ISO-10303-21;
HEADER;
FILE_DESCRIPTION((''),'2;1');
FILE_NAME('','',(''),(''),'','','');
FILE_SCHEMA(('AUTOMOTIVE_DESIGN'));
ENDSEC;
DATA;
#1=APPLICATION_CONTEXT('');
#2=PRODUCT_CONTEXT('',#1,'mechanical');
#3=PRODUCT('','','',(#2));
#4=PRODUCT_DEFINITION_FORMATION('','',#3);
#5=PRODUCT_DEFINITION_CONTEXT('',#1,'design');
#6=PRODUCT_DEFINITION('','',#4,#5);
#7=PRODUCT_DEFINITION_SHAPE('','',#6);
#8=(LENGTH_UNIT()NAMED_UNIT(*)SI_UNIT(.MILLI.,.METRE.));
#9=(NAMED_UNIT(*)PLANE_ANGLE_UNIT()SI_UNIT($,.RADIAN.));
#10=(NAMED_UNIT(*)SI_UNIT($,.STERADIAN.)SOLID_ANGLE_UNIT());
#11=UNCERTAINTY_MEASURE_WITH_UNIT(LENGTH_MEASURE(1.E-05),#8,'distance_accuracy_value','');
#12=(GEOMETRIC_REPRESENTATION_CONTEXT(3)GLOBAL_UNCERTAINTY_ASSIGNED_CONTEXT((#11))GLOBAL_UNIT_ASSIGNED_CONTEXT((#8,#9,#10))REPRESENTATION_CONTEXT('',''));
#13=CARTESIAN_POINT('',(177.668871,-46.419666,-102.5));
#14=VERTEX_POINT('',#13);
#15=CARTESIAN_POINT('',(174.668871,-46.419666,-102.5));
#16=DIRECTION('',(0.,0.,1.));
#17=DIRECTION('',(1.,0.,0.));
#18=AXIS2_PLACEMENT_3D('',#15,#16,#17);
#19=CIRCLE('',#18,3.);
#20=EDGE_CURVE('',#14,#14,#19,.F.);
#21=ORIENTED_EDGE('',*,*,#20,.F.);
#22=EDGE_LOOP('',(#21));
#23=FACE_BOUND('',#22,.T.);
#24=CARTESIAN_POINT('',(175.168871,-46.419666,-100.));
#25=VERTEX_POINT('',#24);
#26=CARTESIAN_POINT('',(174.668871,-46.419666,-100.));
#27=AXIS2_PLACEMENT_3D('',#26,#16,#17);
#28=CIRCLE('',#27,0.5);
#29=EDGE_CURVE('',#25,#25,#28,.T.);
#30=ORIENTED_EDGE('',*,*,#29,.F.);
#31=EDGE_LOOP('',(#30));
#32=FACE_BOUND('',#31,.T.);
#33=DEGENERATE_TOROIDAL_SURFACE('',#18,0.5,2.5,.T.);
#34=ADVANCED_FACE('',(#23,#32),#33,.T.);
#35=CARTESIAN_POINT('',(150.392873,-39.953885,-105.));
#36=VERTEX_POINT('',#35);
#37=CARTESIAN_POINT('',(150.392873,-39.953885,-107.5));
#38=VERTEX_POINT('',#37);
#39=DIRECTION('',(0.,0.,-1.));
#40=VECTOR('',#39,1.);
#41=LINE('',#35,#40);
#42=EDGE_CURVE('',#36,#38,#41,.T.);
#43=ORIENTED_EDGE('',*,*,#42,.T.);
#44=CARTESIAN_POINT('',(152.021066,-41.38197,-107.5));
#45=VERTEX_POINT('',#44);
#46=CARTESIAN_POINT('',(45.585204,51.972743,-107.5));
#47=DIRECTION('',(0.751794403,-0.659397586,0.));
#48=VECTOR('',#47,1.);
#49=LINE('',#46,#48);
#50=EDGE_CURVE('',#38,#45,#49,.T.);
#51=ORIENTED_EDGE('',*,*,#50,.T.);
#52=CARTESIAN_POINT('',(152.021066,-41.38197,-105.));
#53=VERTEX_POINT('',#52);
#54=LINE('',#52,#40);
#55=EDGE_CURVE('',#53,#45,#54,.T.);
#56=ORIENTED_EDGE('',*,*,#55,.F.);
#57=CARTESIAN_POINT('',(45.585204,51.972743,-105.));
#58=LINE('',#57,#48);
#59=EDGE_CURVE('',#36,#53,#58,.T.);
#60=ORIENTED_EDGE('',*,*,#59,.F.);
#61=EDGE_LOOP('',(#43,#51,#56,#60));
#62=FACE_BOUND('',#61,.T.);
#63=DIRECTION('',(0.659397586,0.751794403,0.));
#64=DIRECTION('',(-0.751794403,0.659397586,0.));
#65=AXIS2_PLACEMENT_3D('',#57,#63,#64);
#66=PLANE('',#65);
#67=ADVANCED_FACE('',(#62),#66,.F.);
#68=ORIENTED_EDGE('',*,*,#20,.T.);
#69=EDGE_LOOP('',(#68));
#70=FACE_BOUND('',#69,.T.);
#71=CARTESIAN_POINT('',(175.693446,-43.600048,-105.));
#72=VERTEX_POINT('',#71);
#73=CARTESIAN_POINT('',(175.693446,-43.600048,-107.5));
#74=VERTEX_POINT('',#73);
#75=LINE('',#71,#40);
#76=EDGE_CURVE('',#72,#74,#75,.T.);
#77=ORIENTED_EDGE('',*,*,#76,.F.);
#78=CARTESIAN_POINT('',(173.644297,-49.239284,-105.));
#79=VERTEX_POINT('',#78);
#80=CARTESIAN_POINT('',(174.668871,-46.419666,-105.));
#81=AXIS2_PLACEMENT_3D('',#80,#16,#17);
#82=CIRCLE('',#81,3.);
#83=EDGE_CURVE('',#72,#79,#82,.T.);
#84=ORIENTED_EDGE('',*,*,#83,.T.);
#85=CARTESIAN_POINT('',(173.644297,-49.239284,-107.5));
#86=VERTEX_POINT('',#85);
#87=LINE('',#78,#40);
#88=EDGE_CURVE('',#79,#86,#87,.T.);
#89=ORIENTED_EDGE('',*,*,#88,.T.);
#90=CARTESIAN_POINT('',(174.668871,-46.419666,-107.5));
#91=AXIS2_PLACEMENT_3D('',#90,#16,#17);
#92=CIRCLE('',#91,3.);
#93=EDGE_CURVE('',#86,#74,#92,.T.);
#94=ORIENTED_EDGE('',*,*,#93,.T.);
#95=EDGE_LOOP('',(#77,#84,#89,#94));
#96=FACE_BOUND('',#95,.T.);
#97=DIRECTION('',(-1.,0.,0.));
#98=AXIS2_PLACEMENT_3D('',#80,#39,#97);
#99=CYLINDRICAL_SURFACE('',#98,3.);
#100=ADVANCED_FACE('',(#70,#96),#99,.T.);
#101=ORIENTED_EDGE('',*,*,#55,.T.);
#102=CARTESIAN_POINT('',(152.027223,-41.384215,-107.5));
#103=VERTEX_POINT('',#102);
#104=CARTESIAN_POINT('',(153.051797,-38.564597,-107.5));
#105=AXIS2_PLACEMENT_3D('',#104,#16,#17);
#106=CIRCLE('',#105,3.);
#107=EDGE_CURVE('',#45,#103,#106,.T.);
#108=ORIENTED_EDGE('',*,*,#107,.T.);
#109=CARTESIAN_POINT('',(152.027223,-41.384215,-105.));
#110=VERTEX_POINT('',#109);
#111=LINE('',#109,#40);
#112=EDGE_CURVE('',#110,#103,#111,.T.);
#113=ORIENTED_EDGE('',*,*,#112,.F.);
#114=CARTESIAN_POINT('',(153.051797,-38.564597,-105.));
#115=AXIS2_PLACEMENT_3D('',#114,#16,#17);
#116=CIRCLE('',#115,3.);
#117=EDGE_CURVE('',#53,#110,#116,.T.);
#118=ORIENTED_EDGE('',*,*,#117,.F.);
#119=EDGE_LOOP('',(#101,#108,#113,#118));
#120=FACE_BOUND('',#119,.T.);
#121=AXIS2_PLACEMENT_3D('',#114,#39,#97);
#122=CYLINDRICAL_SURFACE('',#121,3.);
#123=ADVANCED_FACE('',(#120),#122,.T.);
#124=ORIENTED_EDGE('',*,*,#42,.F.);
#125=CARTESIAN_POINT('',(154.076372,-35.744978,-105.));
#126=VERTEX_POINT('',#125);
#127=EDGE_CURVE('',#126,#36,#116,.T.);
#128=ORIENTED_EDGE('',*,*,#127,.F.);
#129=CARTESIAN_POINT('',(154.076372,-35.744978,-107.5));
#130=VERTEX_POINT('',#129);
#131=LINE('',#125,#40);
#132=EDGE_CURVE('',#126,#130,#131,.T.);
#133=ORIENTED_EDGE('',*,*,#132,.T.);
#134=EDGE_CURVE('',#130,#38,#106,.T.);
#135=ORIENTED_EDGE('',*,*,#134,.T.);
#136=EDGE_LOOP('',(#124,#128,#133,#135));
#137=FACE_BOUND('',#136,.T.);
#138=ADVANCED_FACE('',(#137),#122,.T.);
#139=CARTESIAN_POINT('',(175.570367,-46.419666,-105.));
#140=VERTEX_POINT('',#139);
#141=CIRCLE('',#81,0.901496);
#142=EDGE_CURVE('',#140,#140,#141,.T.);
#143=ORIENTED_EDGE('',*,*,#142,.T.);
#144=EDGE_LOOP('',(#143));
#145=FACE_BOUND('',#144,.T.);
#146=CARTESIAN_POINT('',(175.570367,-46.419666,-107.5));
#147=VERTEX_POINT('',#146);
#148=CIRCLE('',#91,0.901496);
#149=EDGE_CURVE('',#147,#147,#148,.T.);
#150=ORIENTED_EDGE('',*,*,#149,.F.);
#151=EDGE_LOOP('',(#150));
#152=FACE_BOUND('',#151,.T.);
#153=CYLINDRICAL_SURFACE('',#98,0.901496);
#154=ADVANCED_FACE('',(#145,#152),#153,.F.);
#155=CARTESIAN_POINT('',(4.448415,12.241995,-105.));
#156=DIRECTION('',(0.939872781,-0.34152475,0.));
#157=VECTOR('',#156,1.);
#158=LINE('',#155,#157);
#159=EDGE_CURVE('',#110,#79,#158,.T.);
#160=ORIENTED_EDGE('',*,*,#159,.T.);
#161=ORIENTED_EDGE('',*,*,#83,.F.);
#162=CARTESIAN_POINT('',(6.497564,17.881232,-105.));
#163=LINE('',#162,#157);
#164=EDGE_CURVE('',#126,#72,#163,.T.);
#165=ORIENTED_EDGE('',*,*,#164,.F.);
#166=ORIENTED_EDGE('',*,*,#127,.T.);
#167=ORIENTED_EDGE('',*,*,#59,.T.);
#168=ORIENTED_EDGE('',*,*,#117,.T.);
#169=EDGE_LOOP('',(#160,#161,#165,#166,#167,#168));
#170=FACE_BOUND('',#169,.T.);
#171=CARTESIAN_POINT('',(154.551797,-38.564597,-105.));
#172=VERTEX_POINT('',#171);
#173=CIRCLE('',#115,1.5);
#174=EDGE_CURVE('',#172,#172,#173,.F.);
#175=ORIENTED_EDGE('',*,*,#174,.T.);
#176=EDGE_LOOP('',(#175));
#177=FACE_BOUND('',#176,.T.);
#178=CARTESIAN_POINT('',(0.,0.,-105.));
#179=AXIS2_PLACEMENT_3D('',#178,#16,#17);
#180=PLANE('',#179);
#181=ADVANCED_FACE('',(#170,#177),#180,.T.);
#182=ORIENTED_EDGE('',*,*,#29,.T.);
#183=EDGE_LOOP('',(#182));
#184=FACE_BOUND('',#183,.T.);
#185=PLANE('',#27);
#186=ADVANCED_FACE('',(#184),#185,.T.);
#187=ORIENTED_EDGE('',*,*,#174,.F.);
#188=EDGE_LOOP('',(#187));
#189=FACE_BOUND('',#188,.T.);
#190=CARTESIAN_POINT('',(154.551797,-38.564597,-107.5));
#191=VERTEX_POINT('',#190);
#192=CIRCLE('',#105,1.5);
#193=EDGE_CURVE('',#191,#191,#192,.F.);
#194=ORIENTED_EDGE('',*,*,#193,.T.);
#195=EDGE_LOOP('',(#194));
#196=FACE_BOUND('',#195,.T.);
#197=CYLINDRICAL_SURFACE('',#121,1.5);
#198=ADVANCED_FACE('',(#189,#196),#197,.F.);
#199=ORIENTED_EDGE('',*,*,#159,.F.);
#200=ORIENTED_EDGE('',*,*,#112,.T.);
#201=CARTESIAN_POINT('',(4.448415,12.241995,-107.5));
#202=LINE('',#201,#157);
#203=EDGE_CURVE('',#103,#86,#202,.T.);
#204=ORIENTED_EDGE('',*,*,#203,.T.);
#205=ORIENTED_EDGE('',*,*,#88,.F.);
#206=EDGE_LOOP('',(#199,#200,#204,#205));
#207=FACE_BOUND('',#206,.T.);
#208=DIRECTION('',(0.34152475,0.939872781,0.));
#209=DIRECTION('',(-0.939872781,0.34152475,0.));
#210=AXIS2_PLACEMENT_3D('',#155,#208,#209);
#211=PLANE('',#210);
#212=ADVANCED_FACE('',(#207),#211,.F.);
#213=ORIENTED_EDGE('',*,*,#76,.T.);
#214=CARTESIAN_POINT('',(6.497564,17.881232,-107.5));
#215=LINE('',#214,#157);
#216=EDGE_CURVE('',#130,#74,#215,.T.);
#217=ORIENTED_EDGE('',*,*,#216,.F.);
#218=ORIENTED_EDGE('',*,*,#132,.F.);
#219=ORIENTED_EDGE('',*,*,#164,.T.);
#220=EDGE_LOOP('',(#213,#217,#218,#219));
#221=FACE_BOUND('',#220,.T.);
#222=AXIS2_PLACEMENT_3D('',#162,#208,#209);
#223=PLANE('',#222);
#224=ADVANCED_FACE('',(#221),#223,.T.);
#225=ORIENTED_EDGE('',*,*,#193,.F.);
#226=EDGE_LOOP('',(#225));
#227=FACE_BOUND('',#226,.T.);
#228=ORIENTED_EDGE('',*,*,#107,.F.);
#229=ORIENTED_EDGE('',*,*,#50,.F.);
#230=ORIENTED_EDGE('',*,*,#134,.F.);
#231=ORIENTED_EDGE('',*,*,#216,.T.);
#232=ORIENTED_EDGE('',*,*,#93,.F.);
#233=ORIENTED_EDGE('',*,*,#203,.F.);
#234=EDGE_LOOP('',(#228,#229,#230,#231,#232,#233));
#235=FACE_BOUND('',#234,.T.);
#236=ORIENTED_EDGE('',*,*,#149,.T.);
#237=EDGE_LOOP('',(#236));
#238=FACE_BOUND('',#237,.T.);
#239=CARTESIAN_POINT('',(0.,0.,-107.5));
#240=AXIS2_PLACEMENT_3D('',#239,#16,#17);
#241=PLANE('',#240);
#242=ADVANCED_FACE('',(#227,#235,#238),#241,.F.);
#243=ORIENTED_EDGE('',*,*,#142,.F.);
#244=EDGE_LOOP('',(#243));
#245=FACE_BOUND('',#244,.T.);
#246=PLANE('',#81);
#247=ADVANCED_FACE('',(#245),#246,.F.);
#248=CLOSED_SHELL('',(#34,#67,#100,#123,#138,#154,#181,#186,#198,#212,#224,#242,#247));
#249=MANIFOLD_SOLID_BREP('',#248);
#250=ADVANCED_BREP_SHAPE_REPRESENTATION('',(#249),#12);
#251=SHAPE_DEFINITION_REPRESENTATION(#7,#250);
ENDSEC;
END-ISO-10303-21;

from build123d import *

# Parameters (mm, degrees)
CROQUIS1_R              = 1.5
CROQUIS1_R_2            = 0.901496021
SALIENTE_EXTRUIR1_DEPTH = 2.5
CROQUIS2_R              = 3
SALIENTE_EXTRUIR2_DEPTH = 5
REDONDEO1_R             = 2.5


with BuildPart() as part:
    # Croquis1 → Saliente-Extruir1 (new body)
    with BuildSketch(Plane.XY.offset(-107.5)):
        with BuildLine():
            Line((163.042186646, -39.002916794), (154.076371743, -35.744978316))
            ThreePointArc((154.076371743, -35.744978316), (150.794254841, -36.588868647), (150.392873293, -39.953885006))
            Line((150.392873293, -39.953885006), (152.021065929, -41.381969984))
            ThreePointArc((152.021065929, -41.381969984), (152.024143971, -41.383094175), (152.02722324, -41.384215004))
            Line((152.02722324, -41.384215004), (173.644297207, -49.239284265))
            ThreePointArc((173.644297207, -49.239284265), (177.488489802, -47.444240173), (175.69344571, -43.600047578))
            Line((175.69344571, -43.600047578), (163.042186646, -39.002916794))
        make_face()
        with Locations((153.051797491, -38.56459666)):
            Circle(CROQUIS1_R, mode=Mode.SUBTRACT)
        with Locations((174.668871458, -46.419665921)):
            Circle(CROQUIS1_R_2, mode=Mode.SUBTRACT)
    extrude(amount=SALIENTE_EXTRUIR1_DEPTH)

    # Croquis2 → Saliente-Extruir2 (add)
    with BuildSketch(Plane.XY.offset(-105)):
        with Locations((174.668871458, -46.419665921)):
            Circle(CROQUIS2_R)
    extrude(amount=SALIENTE_EXTRUIR2_DEPTH)

    # Redondeo1
    redondeo1_edges = [part.edges().sort_by_distance(p)[0] for p in [
        (171.668871458, -46.419665921, -100),
    ]]
    fillet(redondeo1_edges, radius=REDONDEO1_R)


solid = part.part
